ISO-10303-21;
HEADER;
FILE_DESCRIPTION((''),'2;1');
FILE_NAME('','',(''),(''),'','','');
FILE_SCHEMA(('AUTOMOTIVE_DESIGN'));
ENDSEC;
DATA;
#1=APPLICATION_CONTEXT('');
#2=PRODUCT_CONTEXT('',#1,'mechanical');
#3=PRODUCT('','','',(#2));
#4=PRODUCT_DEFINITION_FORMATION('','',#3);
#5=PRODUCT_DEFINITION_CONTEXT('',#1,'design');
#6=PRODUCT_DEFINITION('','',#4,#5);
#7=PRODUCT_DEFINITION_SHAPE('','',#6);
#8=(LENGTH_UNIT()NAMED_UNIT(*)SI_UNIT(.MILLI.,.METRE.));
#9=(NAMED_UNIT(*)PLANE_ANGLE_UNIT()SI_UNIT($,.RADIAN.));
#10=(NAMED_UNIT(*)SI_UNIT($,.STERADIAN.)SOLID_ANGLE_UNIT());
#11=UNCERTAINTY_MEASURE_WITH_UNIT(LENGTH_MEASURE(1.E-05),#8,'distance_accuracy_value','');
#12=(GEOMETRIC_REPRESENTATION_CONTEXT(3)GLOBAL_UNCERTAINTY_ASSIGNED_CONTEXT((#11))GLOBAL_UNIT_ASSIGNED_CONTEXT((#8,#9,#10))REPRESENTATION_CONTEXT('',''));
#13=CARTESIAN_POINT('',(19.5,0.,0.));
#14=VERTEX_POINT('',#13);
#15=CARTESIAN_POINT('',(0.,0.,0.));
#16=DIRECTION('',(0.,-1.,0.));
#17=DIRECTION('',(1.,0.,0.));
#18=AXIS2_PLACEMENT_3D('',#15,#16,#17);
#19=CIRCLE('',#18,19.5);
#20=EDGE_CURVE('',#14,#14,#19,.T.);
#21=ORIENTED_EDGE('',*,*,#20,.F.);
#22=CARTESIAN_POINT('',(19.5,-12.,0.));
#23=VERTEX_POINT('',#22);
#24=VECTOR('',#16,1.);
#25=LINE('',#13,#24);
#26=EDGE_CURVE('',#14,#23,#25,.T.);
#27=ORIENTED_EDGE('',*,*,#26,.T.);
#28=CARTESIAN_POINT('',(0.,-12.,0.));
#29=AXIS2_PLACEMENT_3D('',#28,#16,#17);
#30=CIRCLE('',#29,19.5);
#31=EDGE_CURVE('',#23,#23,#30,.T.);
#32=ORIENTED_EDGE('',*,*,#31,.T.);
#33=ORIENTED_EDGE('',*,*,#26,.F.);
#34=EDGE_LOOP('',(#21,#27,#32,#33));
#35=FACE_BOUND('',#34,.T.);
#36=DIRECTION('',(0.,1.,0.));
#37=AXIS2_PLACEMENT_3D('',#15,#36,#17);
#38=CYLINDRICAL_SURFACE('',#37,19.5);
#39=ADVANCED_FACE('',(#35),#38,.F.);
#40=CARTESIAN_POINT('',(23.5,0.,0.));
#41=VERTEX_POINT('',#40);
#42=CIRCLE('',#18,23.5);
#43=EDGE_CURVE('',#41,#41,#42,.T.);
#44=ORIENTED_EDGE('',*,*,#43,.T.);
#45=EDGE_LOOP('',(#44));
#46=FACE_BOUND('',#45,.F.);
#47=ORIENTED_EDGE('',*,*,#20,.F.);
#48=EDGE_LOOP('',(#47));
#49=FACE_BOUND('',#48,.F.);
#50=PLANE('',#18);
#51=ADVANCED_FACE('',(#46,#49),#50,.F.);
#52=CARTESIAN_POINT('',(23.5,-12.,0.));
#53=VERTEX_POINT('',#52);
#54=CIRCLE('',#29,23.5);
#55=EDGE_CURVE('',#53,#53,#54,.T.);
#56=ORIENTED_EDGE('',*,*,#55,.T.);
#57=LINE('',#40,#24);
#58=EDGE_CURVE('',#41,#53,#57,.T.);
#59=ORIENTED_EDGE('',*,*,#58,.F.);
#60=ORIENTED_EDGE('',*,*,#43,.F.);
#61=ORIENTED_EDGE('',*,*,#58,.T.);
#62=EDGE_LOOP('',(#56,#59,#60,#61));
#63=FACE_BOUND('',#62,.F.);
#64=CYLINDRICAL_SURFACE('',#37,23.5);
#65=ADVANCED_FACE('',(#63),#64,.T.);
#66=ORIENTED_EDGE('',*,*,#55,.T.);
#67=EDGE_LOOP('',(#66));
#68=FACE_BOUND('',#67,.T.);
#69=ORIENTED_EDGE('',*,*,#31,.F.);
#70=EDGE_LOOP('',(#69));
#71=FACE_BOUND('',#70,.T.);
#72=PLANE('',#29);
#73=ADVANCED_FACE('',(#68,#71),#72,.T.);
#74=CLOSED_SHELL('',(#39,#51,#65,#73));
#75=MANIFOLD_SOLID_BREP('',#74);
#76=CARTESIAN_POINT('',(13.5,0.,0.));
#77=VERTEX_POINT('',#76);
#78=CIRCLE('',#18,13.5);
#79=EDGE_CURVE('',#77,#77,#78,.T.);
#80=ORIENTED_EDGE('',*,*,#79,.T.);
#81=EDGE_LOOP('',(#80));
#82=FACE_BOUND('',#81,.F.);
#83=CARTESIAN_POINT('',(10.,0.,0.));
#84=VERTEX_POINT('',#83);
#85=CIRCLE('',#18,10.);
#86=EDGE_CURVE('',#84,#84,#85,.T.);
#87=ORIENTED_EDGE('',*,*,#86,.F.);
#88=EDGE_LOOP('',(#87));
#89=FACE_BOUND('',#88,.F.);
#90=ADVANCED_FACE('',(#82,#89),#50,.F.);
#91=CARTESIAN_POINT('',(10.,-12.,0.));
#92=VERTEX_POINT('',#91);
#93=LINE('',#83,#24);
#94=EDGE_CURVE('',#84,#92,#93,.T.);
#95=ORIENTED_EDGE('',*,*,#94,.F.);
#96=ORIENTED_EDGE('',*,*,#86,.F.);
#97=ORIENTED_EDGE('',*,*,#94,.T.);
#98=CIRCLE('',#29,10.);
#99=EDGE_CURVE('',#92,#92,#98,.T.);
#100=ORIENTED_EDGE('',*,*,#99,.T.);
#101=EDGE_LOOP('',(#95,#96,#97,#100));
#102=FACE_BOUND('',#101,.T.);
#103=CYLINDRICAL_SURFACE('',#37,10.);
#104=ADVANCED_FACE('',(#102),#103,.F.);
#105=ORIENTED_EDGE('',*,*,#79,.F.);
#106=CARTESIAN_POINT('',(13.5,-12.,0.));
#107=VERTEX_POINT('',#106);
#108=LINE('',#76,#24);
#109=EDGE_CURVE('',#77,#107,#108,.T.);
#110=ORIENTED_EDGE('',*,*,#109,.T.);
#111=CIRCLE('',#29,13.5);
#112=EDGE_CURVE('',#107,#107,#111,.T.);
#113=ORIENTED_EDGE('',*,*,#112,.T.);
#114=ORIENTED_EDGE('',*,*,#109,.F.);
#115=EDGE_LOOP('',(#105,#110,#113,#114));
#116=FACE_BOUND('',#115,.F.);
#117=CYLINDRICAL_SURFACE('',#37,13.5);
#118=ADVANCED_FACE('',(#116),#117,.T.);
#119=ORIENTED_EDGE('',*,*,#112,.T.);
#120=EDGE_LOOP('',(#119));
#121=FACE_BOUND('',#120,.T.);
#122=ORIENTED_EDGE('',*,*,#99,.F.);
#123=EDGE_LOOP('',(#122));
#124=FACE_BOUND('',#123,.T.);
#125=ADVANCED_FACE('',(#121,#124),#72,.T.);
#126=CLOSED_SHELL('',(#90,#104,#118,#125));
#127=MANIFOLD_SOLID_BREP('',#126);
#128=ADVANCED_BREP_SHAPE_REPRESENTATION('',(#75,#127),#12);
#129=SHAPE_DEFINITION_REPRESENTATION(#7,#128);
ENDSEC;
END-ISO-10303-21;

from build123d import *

# Parameters (mm, degrees)
F0_R     = 13.5
F0_R_2   = 10
F1_DEPTH = 12
F2_R     = 23.5
F2_R_2   = 19.5
F3_DEPTH = 12


# Not quite as in the source:
# - a feature of the source that left no trace in its solid (it failed there, or was rolled back) is left out
# - the program builds the solid bodies; features that only make, move or delete a surface that nothing else refers to are left out


with BuildPart() as f1:
    # F0 (on Front) → F1 (new body)
    with BuildSketch(Plane.XZ):
        Circle(F0_R)
        Circle(F0_R_2, mode=Mode.SUBTRACT)
    extrude(amount=F1_DEPTH)


with BuildPart() as f3:
    # F2 (on Front) → F3 (new body)
    with BuildSketch(Plane.XZ):
        Circle(F2_R)
        Circle(F2_R_2, mode=Mode.SUBTRACT)
    extrude(amount=F3_DEPTH)


solid = Compound([f1.part, f3.part])
